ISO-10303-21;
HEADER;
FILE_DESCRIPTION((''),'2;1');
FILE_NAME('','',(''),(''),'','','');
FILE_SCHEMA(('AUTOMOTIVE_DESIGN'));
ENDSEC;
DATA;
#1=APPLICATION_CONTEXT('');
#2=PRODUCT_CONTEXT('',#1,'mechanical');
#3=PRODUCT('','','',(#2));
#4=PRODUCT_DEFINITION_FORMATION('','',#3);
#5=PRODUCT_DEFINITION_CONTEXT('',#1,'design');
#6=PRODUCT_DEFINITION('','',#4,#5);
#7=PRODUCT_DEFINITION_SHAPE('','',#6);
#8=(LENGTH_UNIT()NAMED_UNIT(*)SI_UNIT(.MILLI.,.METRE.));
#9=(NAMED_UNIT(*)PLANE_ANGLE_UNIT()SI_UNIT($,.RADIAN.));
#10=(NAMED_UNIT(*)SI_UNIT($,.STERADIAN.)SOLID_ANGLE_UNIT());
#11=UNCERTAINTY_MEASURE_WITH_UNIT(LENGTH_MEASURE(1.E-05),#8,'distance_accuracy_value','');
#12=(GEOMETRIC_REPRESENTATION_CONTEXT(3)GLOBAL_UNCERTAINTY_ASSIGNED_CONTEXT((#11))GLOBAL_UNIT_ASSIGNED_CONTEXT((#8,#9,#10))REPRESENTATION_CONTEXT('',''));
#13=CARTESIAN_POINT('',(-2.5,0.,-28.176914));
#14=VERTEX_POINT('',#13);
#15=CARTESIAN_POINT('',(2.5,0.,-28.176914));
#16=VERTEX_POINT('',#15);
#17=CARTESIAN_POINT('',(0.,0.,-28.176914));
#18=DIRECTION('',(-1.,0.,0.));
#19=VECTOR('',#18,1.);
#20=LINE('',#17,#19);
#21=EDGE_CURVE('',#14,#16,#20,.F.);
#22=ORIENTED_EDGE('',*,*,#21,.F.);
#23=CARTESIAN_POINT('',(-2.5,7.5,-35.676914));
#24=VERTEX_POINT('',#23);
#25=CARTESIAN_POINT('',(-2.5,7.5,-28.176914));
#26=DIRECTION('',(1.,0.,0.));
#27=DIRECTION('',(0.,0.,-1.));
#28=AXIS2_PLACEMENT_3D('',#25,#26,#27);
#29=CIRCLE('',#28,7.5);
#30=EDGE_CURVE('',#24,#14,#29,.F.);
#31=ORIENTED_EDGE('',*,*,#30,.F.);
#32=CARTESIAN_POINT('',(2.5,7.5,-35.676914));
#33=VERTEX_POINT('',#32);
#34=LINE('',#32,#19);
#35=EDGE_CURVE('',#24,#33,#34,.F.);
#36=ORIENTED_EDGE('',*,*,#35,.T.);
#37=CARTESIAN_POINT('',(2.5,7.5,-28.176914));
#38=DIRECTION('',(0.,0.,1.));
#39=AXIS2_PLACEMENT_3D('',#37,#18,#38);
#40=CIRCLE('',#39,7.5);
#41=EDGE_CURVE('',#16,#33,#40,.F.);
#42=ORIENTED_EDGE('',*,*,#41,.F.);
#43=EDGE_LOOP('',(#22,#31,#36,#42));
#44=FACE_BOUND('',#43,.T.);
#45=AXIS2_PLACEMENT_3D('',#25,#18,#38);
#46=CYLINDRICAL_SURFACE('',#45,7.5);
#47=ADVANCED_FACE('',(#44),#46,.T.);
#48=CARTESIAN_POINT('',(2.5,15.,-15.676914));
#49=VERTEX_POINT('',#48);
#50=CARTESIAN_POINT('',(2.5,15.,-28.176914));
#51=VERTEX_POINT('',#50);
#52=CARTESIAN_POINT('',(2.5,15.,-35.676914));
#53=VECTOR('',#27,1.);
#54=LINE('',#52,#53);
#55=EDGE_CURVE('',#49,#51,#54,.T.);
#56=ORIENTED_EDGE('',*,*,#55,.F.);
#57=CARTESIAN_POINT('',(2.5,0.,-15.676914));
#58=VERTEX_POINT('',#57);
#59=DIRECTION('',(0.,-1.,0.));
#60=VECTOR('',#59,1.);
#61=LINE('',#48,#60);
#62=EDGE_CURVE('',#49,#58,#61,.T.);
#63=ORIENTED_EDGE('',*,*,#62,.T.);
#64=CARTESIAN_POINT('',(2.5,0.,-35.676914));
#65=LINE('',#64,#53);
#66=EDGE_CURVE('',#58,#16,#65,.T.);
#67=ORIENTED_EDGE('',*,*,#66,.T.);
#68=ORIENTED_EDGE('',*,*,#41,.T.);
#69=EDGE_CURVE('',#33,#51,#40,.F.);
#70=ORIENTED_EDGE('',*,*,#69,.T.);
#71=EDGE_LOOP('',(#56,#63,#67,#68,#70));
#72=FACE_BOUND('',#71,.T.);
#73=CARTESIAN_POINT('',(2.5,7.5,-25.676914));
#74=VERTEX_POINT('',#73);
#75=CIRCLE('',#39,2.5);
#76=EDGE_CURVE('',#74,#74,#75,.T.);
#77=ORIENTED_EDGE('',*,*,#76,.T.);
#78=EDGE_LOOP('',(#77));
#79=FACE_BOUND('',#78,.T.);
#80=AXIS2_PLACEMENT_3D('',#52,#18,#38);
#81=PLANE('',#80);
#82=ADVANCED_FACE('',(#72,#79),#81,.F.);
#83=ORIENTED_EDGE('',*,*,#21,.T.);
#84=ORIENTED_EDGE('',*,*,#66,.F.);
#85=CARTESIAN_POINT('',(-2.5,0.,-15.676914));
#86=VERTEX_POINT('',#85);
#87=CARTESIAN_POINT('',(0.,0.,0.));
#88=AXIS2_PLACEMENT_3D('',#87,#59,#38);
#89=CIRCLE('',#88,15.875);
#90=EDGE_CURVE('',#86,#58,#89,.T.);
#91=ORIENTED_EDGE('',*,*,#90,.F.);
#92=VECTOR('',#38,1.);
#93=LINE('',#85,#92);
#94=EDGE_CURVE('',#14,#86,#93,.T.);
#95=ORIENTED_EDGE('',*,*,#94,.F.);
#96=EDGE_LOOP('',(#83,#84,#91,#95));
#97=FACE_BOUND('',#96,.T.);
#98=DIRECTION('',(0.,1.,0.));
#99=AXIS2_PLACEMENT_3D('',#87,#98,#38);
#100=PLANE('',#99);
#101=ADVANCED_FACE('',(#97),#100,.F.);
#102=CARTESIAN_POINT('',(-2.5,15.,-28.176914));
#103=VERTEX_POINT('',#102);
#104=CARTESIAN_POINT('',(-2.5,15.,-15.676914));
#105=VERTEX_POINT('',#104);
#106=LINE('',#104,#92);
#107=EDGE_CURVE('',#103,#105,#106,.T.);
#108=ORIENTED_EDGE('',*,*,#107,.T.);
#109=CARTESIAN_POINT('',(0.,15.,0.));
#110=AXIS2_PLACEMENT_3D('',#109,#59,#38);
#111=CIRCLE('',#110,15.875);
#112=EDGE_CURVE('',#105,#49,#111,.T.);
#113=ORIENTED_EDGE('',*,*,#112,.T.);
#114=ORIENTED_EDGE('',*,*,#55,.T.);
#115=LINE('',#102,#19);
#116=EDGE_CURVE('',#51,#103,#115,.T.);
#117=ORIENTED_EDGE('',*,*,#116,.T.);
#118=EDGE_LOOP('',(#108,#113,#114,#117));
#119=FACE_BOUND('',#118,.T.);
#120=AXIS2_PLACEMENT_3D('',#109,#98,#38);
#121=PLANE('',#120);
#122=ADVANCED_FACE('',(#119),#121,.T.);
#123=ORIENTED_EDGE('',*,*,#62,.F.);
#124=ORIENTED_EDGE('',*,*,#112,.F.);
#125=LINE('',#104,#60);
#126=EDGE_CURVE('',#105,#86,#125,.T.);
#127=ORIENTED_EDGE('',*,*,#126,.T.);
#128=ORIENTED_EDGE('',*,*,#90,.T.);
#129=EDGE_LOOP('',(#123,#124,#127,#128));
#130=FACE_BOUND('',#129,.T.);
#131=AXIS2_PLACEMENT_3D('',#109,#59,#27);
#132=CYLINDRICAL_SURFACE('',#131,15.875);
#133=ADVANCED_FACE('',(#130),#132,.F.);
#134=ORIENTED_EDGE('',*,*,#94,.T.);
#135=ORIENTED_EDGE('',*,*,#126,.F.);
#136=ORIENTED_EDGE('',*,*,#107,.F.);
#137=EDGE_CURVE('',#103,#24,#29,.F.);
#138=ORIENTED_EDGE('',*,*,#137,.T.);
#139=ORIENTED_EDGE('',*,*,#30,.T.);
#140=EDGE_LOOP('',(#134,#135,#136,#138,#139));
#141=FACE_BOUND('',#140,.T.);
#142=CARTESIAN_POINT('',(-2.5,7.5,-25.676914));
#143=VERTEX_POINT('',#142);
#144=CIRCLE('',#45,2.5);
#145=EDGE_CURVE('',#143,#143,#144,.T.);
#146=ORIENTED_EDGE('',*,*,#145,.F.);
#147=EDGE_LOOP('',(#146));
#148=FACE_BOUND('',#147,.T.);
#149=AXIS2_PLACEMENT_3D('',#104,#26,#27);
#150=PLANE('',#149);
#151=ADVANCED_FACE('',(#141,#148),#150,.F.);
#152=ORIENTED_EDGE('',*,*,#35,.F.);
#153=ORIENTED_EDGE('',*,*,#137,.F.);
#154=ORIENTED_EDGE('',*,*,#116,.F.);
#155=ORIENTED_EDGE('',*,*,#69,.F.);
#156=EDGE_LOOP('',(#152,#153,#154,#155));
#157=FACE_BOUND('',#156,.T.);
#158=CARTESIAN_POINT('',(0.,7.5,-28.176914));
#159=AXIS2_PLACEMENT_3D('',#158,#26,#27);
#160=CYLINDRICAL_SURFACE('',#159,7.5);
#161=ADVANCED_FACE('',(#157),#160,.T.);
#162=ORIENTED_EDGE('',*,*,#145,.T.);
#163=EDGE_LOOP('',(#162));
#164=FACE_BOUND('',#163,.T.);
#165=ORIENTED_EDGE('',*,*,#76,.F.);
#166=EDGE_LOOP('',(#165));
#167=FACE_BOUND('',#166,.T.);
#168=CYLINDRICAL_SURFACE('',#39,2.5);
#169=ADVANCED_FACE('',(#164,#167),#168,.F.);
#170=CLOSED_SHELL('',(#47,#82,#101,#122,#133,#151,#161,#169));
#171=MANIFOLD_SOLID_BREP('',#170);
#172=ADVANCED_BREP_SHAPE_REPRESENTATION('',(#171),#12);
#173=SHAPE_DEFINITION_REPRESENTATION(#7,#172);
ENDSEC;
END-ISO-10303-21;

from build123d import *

# Parameters (mm, degrees)
BOSS_EXTRUDE1_DEPTH = 15
FILLET1_R           = 7.5
SKETCH2_R           = 2.5
CUT_EXTRUDE1_DEPTH  = 40.023610486


with BuildPart() as part:
    # Sketch1 → Boss-Extrude1 (new body)
    with BuildSketch(Plane(origin=(0, 0, 0), x_dir=(1, 0, 0), z_dir=(0, 1, 0))):
        with BuildLine():
            Line((-2.5, 15.676913759), (-2.5, 35.676913759))
            Line((-2.5, 35.676913759), (2.5, 35.676913759))
            Line((2.5, 35.676913759), (2.5, 15.676913759))
            ThreePointArc((2.5, 15.676913759), (0, 15.875), (-2.5, 15.676913759))
        make_face()
    extrude(amount=BOSS_EXTRUDE1_DEPTH)

    # Fillet1
    fillet1_edges = [part.edges().sort_by_distance(p)[0] for p in [
        (0, 0, -35.676913759),
        (0, 15, -35.676913759),
    ]]
    fillet(fillet1_edges, radius=FILLET1_R - 0.0001)  # a hair under: the kernel refuses the full size

    # Sketch2 → Cut-Extrude1 (cut, through all)
    with BuildSketch(Plane.ZY.offset(2.5)):
        with Locations((-28.176913759, 7.5)):
            Circle(SKETCH2_R)
    extrude(amount=-CUT_EXTRUDE1_DEPTH, mode=Mode.SUBTRACT)


solid = part.part
